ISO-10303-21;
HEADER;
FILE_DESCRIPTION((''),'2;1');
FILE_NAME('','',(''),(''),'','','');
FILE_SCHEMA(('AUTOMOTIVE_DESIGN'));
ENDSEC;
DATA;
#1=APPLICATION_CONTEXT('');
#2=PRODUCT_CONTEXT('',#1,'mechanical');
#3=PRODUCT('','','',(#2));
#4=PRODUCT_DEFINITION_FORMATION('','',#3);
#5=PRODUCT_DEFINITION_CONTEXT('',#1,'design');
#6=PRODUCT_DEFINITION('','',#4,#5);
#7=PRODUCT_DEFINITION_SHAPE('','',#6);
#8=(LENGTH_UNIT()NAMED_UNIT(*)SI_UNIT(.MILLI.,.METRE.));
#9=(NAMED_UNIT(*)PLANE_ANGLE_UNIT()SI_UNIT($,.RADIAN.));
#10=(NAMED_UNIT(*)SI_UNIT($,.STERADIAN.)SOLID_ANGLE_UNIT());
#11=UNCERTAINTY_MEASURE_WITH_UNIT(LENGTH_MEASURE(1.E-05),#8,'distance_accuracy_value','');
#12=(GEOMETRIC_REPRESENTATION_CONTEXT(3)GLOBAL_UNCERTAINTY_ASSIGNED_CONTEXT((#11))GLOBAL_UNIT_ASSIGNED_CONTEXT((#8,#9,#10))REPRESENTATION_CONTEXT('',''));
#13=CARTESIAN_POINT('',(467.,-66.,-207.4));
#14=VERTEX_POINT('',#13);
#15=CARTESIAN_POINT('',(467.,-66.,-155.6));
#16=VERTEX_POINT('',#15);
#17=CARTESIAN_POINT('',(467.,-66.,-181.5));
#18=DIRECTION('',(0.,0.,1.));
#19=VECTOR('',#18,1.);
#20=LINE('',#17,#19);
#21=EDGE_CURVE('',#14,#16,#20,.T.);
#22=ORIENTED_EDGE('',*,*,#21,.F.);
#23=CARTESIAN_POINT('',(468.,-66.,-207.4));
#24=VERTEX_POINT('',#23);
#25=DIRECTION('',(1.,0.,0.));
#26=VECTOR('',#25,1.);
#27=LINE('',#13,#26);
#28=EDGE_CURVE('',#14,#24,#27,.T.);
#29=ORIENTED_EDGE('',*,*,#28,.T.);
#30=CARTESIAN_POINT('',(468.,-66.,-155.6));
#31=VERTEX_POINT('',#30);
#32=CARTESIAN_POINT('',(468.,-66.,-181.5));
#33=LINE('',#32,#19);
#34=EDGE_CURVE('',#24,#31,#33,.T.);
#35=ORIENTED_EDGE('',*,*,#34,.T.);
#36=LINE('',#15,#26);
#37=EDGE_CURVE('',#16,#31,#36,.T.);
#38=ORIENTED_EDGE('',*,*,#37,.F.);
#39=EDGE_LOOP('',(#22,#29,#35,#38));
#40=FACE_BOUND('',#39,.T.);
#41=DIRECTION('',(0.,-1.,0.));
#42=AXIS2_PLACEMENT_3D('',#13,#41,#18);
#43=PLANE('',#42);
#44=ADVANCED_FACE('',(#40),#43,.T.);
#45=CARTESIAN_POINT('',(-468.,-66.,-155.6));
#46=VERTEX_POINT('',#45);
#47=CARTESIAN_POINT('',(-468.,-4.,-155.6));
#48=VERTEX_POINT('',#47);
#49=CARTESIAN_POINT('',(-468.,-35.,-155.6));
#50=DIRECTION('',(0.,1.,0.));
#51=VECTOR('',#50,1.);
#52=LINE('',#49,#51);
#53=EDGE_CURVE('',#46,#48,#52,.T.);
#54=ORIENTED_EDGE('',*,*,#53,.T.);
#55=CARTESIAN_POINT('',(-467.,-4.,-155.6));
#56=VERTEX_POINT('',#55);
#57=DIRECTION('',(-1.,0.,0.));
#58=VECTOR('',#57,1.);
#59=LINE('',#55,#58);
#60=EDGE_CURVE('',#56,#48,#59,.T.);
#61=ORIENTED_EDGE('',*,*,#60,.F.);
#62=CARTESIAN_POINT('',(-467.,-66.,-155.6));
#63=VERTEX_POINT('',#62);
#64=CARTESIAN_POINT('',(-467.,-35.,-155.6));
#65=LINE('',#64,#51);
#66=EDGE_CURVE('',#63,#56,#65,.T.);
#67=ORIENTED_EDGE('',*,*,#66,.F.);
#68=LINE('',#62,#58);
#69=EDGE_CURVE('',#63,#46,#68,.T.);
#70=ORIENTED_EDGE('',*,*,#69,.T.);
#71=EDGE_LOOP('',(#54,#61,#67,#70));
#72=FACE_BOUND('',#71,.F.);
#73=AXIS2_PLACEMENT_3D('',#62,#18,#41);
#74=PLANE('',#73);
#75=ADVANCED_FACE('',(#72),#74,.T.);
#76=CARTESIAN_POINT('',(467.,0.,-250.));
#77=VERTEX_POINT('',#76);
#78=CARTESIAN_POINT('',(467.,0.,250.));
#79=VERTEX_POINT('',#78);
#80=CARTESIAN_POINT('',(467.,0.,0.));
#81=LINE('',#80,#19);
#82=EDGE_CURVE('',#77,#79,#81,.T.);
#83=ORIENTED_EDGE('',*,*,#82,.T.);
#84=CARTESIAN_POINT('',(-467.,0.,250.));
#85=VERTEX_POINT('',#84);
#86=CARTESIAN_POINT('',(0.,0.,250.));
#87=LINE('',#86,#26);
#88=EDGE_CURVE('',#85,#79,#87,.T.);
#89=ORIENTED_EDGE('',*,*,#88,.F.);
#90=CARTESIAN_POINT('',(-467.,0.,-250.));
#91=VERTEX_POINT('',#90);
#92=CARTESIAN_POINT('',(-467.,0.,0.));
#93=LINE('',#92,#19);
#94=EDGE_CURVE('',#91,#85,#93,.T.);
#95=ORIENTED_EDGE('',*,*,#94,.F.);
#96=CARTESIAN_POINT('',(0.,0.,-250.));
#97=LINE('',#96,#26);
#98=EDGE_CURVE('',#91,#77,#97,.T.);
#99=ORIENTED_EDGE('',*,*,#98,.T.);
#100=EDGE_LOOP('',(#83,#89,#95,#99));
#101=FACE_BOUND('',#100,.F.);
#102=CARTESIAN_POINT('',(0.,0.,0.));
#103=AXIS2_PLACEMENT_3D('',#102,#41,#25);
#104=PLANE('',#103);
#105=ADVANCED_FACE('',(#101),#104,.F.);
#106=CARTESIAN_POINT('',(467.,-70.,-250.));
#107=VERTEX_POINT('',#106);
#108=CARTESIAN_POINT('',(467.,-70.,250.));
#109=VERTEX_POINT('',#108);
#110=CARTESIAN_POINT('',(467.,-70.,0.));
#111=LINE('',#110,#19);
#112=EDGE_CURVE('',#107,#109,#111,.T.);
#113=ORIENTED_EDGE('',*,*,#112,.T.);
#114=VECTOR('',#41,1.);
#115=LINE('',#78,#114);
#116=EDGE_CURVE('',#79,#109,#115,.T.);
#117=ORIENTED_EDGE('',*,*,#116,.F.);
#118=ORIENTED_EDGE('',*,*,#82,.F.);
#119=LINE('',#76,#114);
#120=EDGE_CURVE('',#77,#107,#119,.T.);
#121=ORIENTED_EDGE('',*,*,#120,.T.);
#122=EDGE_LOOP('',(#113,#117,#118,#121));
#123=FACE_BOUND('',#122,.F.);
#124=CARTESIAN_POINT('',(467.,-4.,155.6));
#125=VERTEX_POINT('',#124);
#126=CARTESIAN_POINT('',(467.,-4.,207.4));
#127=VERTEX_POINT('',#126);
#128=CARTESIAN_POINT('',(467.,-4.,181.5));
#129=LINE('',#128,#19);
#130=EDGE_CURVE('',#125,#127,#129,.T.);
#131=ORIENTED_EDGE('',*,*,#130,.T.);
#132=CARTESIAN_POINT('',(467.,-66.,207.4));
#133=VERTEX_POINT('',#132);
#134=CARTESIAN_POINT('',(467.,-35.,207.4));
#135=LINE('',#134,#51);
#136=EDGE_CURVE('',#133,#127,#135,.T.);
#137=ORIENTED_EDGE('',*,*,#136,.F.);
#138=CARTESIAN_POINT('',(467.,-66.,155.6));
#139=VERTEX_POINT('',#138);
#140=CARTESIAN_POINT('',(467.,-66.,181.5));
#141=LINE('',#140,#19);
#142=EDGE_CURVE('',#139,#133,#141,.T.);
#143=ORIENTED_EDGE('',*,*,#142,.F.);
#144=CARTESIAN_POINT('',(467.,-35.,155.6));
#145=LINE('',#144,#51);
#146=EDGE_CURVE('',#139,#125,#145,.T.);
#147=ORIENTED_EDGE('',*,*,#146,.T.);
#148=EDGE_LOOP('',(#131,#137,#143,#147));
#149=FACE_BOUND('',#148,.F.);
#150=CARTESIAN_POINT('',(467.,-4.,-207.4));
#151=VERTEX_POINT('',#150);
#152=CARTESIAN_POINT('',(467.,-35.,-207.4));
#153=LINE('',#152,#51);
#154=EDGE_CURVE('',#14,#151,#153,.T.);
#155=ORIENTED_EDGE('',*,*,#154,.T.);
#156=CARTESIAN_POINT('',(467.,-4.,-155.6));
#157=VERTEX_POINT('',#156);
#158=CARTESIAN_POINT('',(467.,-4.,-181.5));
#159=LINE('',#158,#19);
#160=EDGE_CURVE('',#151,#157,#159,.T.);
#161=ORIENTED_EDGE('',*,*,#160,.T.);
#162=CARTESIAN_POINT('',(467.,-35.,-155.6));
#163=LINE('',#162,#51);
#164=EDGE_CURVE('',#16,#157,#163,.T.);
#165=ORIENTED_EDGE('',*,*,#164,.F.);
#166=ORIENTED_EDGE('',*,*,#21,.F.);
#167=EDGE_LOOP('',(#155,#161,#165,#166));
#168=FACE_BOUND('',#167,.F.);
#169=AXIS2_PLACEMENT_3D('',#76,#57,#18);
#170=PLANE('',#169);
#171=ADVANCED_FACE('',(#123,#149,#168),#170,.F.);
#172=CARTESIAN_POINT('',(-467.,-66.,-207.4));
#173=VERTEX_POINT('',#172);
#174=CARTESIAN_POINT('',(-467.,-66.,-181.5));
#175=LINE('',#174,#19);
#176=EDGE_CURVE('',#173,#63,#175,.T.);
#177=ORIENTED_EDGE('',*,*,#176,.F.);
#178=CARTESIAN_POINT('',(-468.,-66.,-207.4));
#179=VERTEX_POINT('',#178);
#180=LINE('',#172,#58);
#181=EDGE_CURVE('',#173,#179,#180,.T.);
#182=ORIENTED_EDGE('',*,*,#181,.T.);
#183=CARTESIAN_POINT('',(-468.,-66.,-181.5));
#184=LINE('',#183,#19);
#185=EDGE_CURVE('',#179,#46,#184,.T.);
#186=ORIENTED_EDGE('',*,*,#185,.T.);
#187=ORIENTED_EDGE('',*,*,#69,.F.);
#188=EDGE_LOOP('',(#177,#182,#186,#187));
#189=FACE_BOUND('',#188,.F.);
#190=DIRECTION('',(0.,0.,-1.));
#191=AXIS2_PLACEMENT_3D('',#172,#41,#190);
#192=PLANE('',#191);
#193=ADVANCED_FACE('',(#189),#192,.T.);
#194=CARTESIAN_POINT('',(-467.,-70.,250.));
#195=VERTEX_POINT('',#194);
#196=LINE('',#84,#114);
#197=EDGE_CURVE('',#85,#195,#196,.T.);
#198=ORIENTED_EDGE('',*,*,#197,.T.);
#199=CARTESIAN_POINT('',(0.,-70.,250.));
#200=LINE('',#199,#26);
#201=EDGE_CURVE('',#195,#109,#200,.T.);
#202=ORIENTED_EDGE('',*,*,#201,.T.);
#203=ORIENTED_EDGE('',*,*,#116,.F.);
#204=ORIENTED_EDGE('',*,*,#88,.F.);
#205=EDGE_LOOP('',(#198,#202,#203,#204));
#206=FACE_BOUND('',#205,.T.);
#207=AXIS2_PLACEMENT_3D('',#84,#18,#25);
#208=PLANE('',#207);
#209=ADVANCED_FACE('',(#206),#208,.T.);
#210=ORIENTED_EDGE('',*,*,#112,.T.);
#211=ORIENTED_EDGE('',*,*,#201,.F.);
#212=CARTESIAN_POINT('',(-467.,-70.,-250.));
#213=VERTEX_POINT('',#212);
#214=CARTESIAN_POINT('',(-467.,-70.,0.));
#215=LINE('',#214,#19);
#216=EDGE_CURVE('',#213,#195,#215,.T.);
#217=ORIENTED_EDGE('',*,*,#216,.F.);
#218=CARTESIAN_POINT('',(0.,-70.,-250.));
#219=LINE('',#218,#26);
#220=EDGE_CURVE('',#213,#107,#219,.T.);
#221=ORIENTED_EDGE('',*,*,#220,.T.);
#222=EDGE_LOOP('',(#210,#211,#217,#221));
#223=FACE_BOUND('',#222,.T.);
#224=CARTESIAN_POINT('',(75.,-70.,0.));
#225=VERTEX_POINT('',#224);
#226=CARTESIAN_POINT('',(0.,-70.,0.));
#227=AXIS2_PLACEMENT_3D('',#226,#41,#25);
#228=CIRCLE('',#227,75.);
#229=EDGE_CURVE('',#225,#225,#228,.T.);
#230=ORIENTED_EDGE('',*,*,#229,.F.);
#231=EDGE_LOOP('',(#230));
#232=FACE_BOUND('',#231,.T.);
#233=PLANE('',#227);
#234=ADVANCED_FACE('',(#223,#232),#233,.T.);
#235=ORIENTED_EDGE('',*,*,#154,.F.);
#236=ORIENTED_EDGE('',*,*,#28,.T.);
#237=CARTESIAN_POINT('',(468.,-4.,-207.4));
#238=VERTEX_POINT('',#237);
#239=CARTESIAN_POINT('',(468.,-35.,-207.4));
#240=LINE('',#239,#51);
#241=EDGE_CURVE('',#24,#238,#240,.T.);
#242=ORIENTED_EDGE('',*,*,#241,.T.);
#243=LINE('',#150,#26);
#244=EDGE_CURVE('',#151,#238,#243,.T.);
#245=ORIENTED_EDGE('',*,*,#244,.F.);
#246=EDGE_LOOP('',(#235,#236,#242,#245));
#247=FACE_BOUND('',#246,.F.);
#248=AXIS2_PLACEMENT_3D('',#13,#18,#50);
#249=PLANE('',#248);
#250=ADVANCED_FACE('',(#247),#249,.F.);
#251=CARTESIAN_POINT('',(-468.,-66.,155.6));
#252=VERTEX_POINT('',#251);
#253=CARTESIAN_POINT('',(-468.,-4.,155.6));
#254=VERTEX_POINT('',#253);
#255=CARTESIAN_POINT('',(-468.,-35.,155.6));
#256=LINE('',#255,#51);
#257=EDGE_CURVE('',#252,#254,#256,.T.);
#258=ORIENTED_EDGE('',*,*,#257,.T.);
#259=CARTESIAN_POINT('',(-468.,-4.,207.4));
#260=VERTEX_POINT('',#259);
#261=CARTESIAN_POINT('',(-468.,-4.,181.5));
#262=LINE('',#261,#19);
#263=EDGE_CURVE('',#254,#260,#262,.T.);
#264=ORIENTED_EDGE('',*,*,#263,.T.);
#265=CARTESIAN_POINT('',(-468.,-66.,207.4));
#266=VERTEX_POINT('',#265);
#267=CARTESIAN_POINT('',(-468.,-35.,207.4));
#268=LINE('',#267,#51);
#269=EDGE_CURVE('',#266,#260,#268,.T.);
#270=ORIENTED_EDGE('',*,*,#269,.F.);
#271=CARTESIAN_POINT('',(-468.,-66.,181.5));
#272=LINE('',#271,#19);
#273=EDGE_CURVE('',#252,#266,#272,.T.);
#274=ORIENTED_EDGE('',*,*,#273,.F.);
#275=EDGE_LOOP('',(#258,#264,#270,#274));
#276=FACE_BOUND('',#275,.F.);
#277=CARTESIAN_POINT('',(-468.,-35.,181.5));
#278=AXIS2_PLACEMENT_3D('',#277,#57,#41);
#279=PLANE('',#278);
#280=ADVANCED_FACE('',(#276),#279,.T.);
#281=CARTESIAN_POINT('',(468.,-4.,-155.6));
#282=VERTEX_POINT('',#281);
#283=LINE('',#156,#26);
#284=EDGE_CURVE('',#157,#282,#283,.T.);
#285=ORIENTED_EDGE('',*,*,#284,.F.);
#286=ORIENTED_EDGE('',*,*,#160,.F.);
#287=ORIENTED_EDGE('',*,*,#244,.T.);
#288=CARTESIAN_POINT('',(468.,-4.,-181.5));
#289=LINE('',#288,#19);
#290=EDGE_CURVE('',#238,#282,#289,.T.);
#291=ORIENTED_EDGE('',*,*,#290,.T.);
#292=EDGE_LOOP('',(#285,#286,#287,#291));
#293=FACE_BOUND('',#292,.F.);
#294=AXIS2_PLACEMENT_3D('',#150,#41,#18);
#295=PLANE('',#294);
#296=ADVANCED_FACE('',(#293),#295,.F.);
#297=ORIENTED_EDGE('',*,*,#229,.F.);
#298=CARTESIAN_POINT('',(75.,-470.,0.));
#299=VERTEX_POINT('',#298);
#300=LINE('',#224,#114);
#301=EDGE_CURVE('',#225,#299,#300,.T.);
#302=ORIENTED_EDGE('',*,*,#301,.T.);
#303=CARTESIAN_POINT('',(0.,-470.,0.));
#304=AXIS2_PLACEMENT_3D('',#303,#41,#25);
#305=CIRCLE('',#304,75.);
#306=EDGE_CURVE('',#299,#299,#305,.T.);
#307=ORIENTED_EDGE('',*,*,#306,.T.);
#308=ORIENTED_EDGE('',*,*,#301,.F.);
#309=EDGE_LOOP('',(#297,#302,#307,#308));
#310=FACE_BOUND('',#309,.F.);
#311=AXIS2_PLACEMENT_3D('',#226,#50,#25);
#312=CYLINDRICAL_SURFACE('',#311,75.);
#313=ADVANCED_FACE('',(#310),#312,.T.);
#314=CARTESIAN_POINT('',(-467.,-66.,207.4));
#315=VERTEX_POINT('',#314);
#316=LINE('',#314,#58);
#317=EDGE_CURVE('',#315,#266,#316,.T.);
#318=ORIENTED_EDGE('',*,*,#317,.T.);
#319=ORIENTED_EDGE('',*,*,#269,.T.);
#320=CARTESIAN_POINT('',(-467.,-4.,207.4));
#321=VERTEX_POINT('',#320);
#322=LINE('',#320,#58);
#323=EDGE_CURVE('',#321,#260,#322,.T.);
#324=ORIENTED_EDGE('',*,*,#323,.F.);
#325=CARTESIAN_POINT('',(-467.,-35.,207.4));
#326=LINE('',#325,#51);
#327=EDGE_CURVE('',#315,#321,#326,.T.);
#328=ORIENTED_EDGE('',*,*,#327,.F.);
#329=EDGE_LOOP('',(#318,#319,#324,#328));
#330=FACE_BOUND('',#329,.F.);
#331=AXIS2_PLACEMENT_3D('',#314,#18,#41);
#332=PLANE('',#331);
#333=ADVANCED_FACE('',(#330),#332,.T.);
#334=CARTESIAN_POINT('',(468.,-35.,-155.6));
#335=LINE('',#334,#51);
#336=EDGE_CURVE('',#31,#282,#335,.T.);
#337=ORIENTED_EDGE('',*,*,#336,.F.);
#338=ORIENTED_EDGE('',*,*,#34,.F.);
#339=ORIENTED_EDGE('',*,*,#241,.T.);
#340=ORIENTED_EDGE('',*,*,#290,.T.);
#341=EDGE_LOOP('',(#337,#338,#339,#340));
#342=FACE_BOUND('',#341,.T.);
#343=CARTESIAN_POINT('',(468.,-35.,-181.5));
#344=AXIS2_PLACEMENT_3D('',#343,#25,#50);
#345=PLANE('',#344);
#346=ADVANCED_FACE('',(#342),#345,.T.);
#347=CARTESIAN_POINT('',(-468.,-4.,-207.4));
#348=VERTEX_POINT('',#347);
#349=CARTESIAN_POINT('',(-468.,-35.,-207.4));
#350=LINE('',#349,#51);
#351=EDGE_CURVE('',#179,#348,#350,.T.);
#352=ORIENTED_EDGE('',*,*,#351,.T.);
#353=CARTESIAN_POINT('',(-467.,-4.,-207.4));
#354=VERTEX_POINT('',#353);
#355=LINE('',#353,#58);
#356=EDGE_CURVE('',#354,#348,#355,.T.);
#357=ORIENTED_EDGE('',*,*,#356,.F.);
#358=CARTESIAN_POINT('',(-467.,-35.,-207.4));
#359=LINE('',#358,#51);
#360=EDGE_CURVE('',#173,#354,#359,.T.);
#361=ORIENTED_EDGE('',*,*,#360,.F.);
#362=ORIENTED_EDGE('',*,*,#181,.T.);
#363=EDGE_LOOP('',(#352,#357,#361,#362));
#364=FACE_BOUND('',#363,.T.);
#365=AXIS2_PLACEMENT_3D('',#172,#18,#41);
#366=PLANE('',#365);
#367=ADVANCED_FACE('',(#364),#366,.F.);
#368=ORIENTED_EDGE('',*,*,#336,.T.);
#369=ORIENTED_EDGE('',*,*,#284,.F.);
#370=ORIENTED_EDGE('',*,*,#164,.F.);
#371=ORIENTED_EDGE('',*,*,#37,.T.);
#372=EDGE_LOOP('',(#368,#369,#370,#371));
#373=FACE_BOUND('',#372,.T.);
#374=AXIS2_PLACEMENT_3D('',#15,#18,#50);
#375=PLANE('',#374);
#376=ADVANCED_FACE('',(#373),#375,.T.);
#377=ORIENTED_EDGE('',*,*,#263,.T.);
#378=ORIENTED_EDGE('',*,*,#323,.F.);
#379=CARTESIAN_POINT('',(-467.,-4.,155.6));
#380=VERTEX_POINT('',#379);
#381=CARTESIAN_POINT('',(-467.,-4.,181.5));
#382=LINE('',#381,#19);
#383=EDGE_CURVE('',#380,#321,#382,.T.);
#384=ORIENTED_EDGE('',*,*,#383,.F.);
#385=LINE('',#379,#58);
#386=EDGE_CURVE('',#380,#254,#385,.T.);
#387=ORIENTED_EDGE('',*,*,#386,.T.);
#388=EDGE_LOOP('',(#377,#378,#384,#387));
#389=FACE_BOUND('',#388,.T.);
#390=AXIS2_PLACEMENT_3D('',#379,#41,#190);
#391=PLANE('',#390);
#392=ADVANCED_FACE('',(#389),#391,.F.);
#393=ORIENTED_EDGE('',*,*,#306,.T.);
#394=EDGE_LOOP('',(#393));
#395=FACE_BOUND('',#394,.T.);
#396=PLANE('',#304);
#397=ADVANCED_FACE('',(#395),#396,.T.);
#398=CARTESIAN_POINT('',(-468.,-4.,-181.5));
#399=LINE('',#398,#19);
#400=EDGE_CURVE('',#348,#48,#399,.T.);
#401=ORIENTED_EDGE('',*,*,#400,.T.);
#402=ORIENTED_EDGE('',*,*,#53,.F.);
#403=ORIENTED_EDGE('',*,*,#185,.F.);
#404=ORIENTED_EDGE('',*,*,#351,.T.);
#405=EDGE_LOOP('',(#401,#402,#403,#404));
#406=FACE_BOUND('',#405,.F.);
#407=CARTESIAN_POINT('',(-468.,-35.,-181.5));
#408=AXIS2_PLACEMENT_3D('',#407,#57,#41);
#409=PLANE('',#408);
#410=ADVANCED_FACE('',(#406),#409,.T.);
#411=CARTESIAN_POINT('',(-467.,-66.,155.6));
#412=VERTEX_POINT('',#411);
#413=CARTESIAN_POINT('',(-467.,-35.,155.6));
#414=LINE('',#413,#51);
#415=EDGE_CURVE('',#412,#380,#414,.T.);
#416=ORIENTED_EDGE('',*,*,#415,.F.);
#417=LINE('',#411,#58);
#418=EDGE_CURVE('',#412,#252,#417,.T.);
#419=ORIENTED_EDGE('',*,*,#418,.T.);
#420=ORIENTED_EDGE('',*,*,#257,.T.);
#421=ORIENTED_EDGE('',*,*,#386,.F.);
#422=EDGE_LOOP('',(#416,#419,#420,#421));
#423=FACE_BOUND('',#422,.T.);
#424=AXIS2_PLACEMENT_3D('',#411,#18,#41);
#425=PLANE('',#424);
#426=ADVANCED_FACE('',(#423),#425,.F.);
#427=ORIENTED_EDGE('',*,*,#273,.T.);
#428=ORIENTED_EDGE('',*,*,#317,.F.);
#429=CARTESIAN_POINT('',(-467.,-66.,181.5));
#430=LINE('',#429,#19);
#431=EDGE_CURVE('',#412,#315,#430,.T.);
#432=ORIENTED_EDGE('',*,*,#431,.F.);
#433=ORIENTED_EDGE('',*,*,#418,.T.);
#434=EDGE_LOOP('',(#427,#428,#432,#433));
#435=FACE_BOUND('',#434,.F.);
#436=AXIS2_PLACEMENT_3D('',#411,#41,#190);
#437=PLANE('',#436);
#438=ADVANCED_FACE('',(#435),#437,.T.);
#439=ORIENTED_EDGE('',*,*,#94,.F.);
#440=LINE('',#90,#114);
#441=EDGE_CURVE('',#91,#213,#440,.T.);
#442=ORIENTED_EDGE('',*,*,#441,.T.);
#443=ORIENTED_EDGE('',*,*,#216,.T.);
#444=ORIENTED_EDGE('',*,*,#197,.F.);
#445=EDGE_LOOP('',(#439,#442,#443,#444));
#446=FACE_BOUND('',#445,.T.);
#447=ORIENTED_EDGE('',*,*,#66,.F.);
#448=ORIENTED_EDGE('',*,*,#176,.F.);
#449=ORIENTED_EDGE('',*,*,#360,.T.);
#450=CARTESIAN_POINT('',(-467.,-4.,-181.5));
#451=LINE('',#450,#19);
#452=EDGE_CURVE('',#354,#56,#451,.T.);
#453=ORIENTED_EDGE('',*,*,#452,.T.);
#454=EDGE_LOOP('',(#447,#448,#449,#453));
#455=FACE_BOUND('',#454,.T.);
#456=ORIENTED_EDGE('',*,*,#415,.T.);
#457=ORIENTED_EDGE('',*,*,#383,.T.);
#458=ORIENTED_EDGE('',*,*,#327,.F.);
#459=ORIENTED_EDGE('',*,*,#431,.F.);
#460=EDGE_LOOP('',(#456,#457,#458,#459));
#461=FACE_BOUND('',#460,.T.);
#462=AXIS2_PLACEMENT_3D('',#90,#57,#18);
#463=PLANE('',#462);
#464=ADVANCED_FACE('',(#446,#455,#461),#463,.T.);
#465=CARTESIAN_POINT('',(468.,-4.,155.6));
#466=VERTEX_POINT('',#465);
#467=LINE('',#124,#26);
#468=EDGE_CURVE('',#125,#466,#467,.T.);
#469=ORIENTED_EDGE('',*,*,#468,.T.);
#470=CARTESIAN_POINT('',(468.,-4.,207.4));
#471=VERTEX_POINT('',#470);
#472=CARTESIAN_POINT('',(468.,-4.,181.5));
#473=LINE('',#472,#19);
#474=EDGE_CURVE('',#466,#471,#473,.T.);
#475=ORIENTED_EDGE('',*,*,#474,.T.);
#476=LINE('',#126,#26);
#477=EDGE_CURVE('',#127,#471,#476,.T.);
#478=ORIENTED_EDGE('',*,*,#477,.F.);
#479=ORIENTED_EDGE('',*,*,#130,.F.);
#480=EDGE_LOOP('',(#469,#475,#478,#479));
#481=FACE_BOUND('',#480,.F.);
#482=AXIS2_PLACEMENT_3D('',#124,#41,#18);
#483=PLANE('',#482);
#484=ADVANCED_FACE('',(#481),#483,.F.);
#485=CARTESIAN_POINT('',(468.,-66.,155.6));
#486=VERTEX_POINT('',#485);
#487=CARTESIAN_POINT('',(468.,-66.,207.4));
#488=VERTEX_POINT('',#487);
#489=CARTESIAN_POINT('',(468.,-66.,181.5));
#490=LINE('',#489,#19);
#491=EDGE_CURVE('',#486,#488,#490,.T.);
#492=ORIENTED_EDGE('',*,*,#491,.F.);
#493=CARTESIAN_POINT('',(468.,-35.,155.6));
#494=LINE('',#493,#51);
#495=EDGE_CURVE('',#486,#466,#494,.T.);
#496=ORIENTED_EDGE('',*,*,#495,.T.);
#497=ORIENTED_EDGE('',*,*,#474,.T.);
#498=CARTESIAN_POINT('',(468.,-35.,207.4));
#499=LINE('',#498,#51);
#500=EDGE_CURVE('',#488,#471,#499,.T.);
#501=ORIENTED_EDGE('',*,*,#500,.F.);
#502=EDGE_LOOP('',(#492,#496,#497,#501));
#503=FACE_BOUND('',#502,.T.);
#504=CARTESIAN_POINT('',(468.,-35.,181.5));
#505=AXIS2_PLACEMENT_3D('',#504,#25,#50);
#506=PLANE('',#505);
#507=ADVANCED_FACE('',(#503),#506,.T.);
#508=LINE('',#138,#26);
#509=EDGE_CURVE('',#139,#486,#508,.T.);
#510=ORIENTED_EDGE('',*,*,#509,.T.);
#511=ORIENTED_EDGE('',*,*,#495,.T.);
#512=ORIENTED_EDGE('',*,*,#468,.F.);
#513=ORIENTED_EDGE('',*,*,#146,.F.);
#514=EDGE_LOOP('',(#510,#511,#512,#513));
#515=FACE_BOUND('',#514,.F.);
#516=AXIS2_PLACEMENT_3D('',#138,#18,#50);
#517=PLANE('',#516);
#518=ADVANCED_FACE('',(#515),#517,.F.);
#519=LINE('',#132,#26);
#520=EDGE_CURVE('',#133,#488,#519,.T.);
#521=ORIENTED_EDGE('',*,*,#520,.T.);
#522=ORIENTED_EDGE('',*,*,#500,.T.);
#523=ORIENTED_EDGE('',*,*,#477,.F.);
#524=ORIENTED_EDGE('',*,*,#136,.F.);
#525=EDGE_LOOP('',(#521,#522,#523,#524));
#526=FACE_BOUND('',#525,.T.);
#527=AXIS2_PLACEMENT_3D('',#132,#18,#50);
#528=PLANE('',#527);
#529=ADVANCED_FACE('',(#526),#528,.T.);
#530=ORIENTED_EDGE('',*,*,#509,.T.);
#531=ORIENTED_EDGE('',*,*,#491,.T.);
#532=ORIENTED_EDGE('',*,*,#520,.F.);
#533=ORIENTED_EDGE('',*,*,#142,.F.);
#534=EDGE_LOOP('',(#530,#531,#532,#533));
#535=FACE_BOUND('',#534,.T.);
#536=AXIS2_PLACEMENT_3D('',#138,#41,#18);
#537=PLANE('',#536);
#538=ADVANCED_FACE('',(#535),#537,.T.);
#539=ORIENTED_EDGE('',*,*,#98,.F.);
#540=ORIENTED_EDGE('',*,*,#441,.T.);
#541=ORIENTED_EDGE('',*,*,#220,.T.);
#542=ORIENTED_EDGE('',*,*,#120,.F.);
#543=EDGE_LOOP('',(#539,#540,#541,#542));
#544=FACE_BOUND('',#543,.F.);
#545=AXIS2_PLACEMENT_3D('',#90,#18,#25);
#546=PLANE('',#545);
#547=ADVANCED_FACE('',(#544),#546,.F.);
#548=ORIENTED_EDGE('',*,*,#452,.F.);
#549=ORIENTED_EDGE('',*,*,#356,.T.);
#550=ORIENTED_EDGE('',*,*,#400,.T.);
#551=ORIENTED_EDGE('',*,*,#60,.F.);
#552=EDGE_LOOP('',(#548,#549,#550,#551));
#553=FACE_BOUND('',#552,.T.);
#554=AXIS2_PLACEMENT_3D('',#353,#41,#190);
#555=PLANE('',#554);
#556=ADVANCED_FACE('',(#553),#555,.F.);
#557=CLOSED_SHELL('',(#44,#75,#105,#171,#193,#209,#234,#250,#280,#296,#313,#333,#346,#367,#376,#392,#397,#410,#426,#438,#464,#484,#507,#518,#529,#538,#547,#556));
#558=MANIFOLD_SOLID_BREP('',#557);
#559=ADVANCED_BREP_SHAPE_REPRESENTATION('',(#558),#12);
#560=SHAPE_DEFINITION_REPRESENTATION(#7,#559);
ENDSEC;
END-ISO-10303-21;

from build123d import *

# Parameters (mm, degrees)
F0_W     = 934
F0_H     = 500
F1_DEPTH = 70
F2_R     = 75
F3_DEPTH = 400
F4_W     = 62
F4_H     = 51.8
F5_DEPTH = 1


# Not quite as in the source:
# - a pattern or mirror of a feature is missing from the dataset's text; its kind, count and spacing are read off the source's solid


with BuildPart() as f1:
    # F0 (on Front) → F1 (new body)
    with BuildSketch(Plane.XZ):
        Rectangle(F0_W, F0_H)
    extrude(amount=F1_DEPTH)

    # F2 (on face) → F3 (join)
    with BuildSketch(Plane.XZ.offset(70)):
        Circle(F2_R)
    extrude(amount=F3_DEPTH)

    # F4 (on face) → F5 (join)
    with BuildSketch(Plane.YZ.offset(467)):
        with Locations((-35, 181.5)):
            Rectangle(F4_W, F4_H)
        with Locations((-35, -181.5)):
            Rectangle(F4_W, F4_H)
    f5 = extrude(amount=F5_DEPTH)

    # F5_copies: F5 across plane
    add(f5.mirror(Plane(origin=(0, 0, 0), x_dir=(0, 0, -1), z_dir=(-1, 0, 0))))


solid = f1.part
